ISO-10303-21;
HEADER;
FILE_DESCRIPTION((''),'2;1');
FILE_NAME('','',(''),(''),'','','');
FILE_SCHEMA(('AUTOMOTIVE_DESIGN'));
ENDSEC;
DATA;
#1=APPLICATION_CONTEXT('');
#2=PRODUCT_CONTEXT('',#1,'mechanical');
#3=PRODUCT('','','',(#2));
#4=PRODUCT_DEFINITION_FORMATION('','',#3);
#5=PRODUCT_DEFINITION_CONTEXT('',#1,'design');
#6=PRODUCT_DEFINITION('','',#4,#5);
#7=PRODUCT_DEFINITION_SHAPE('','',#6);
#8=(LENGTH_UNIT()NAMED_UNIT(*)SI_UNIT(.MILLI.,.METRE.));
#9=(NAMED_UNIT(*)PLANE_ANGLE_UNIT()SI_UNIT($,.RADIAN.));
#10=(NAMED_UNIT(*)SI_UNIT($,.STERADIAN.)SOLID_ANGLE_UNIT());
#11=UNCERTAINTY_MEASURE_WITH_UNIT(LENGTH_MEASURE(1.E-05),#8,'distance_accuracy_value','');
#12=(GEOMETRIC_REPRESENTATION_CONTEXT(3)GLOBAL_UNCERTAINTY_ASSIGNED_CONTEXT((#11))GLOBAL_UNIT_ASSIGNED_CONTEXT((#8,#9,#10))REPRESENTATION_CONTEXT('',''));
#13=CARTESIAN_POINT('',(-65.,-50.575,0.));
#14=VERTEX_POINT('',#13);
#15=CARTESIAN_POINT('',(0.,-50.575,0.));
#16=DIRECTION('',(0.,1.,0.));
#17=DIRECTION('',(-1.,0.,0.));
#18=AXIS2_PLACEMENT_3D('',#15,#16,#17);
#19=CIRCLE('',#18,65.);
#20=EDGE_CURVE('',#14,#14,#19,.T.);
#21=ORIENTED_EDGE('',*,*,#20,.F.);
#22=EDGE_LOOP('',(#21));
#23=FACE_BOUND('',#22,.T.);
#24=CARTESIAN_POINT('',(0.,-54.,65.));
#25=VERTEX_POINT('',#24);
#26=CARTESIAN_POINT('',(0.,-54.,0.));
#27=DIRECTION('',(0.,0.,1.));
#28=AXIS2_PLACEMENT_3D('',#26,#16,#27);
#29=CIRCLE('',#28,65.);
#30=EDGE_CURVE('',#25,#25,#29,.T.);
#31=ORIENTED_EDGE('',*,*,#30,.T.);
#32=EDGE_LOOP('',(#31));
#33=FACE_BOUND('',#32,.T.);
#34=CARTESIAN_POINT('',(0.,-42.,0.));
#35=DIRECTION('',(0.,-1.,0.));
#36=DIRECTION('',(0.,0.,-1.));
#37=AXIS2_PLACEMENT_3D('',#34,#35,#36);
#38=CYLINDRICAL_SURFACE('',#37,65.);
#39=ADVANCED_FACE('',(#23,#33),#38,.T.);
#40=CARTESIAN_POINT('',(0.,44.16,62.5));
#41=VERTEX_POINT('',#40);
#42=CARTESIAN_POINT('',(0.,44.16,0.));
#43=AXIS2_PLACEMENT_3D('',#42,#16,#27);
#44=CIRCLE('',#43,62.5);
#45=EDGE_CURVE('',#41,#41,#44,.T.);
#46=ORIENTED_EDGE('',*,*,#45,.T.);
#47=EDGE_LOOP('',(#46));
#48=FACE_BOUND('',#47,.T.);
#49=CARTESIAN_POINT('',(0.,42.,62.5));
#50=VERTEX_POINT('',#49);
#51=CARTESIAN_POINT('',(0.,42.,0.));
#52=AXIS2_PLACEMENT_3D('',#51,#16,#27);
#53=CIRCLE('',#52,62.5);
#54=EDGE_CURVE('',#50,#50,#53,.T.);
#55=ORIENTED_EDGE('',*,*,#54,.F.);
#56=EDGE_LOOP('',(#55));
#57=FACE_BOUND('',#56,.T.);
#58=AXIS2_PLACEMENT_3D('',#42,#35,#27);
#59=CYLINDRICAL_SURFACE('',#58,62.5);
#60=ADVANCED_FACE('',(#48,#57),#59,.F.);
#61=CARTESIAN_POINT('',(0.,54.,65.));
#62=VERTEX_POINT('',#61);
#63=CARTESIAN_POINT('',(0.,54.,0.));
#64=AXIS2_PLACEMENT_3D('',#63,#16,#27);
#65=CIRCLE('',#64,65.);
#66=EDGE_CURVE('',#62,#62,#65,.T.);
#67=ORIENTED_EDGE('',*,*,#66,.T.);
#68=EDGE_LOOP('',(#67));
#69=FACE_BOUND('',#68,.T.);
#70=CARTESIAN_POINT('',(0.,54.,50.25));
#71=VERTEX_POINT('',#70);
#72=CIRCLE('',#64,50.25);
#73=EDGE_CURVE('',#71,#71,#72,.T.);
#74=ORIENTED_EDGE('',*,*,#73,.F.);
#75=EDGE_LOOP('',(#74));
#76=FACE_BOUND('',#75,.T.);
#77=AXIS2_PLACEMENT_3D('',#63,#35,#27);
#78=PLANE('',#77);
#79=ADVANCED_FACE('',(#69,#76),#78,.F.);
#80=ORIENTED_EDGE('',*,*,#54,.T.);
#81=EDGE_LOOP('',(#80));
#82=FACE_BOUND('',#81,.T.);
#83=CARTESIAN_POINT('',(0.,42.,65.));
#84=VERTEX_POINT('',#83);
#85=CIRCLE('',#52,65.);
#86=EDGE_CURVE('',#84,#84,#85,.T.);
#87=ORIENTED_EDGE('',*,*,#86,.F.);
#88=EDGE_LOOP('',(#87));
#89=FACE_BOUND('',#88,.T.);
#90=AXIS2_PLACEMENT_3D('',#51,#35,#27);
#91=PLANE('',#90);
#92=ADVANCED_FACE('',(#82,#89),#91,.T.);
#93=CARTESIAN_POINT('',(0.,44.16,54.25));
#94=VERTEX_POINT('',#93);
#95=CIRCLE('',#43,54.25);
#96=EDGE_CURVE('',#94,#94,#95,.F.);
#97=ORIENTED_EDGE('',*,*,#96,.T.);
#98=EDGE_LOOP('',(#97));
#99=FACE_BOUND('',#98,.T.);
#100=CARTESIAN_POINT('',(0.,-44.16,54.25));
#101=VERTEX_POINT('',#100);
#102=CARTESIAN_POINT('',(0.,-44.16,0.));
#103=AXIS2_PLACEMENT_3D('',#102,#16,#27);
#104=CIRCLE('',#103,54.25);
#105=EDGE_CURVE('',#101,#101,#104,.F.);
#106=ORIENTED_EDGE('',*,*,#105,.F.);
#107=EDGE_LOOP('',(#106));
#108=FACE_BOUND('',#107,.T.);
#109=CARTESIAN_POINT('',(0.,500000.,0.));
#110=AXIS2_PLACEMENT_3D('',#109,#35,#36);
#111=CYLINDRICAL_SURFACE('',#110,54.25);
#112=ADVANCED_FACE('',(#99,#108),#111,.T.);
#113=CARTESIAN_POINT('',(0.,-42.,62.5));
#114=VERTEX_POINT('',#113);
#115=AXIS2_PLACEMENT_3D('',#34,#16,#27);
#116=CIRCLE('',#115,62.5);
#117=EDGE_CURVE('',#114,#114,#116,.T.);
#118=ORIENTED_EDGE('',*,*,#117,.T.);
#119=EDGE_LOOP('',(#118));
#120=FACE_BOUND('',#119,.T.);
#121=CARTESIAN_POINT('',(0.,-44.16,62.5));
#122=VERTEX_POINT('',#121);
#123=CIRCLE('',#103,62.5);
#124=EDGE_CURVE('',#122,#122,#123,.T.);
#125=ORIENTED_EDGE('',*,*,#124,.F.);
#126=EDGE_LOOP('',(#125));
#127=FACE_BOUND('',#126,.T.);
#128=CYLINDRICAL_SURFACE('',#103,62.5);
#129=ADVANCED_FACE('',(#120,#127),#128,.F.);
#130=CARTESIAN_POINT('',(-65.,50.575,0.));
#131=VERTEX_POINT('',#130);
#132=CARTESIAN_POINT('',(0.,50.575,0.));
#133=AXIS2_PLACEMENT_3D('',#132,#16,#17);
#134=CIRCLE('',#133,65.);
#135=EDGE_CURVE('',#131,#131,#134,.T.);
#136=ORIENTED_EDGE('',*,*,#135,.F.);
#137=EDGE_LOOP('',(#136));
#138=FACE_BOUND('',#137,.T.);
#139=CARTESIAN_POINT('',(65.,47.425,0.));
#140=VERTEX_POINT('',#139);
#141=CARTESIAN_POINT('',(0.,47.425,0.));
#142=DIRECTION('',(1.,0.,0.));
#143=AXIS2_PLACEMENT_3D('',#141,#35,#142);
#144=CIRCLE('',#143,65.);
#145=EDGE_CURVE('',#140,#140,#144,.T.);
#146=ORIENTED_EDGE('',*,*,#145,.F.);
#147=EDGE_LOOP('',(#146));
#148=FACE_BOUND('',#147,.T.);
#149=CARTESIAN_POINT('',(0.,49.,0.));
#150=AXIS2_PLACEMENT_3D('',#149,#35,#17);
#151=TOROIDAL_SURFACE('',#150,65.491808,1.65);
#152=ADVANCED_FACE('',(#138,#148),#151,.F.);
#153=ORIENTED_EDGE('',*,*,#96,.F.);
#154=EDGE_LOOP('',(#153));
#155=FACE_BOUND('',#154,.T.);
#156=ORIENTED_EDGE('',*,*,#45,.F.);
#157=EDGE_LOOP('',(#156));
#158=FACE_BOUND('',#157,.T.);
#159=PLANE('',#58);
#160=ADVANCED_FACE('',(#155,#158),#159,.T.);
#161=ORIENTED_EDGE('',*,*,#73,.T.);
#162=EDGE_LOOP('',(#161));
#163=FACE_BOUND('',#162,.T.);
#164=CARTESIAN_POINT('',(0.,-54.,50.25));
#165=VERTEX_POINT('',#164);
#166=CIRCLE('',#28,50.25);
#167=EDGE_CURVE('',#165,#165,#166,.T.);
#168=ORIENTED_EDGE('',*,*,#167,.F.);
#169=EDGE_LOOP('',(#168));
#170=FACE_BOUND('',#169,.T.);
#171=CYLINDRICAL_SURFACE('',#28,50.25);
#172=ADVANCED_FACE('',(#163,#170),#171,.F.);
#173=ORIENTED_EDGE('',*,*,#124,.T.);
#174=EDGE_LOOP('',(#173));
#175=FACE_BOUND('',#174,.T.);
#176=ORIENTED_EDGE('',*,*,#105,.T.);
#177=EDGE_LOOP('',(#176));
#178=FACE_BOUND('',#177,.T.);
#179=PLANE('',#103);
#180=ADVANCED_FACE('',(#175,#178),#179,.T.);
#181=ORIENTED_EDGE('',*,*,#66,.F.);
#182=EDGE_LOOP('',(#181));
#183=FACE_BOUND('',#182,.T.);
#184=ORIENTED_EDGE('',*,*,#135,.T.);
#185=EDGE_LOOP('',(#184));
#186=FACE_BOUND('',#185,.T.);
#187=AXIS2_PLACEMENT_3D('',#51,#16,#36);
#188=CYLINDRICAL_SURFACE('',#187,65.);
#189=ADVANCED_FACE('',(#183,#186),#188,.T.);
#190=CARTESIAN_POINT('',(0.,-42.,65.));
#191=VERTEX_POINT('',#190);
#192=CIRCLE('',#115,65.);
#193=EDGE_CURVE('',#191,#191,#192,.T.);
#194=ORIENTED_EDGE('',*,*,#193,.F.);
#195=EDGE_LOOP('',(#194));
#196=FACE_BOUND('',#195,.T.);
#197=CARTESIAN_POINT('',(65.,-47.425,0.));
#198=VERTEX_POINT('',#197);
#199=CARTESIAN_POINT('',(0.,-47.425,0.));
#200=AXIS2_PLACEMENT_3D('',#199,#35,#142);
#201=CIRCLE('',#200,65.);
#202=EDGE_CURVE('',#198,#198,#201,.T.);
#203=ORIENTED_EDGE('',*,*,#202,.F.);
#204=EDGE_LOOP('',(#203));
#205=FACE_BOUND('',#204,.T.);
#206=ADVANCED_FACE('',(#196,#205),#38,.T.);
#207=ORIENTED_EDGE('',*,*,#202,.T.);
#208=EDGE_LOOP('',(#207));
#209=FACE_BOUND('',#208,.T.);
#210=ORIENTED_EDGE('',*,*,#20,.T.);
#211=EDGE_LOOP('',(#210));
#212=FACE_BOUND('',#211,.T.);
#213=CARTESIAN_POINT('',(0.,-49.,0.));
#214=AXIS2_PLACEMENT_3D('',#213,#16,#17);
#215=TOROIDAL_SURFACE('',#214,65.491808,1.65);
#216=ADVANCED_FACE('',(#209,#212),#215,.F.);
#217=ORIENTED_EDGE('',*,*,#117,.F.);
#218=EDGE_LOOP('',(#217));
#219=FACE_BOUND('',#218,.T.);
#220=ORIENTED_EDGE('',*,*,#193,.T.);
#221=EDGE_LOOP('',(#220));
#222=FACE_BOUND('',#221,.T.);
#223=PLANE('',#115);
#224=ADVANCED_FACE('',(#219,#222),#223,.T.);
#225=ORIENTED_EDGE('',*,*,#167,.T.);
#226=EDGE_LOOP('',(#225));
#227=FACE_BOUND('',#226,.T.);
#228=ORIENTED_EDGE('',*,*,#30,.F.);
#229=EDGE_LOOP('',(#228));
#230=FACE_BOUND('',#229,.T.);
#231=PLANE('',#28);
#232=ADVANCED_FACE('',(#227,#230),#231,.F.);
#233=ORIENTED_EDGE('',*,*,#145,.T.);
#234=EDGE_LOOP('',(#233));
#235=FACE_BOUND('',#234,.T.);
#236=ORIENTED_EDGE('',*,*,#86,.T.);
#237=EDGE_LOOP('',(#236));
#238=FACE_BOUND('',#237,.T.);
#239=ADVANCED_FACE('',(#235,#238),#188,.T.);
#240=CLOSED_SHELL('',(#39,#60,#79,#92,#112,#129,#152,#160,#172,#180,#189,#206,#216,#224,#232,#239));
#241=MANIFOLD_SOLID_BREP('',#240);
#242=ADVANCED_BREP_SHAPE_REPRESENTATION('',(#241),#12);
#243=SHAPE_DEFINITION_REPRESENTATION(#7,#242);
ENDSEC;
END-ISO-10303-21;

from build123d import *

# Parameters (mm, degrees)
BOSS_EXTRUDE1_START = -54
SKETCH1_R           = 65
BOSS_EXTRUDE1_DEPTH = 12
SKETCH2_R           = 54.25
CUT_EXTRUDE1_DEPTH  = 6
SKETCH3_R           = 50.25
CUT_EXTRUDE2_DEPTH  = 93.119487623
SKETCH4_R           = 62.5
CUT_EXTRUDE3_DEPTH  = 2.16
BOSS_EXTRUDE2_REACH = 139.31
SKETCH8_R           = 54.25
SKETCH8_R_2         = 50.25


# Read off the part's stored shape, not the designer's step: Cut-Revolve1
with BuildPart() as part:
    # Sketch1 → Boss-Extrude1 (new body)
    with BuildSketch(Plane(origin=(0, 0, 0), x_dir=(1, 0, 0), z_dir=(0, 1, 0)).offset(BOSS_EXTRUDE1_START)):
        with Locations(Location((0, 0, 0), (0, 0, 270))):
            Circle(SKETCH1_R)
    extrude(amount=BOSS_EXTRUDE1_DEPTH)

    # Sketch2 → Cut-Extrude1 (cut)
    with BuildSketch(Plane(origin=(0, -42, 0), x_dir=(1, 0, 0), z_dir=(0, 1, 0))):
        with Locations(Location((0, 0, 0), (0, 0, 270))):
            Circle(SKETCH2_R)
    extrude(amount=-CUT_EXTRUDE1_DEPTH, mode=Mode.SUBTRACT)

    # Sketch3 → Cut-Extrude2 (cut, through all)
    with BuildSketch(Plane(origin=(0, -48, 0), x_dir=(1, 0, 0), z_dir=(0, 1, 0))):
        with Locations(Location((0, 0, 0), (0, 0, 270))):
            Circle(SKETCH3_R)
    extrude(amount=-CUT_EXTRUDE2_DEPTH, mode=Mode.SUBTRACT)

    # Sketch4 → Cut-Extrude3 (cut)
    with BuildSketch(Plane(origin=(0, -42, 0), x_dir=(1, 0, 0), z_dir=(0, 1, 0))):
        with Locations(Location((0, 0, 0), (0, 0, 270))):
            Circle(SKETCH4_R)
    extrude(amount=-CUT_EXTRUDE3_DEPTH, mode=Mode.SUBTRACT)

    # Cut-Revolve1 outline → Cut-Revolve1 (revolve, cut)
    with BuildSketch(Plane.XY):
        with BuildLine():
            Line((65, -50.575), (65, -47.425))
            ThreePointArc((65, -47.425), (63.841807889, -49), (65, -50.575))
        make_face()
    revolve(axis=Axis((0, 0, 0), (0, 1, 0)), mode=Mode.SUBTRACT)


with BuildPart() as body_2:
    # Mirror5: mirrored copy
    add(part.part.mirror(Plane.ZX))

    # Sketch8 → Boss-Extrude2 (add, up to next)
    with BuildSketch(Plane(origin=(0, -48, 0), x_dir=(1, 0, 0), z_dir=(0, 1, 0)), mode=Mode.PRIVATE) as boss_extrude2_sk1:
        with Locations(Location((0, 0, 0), (0, 0, 270))):
            Circle(SKETCH8_R)
        with Locations(Location((0, 0, 0), (0, 0, 270))):
            Circle(SKETCH8_R_2, mode=Mode.SUBTRACT)
    boss_extrude2_tool1 = extrude(boss_extrude2_sk1.sketch, amount=BOSS_EXTRUDE2_REACH, mode=Mode.PRIVATE) - body_2.part

    add(part.part)  # Boss-Extrude2 merges part
    add(boss_extrude2_tool1.solids().sort_by_distance((0, -48, -52.715578))[0])


solid = body_2.part
